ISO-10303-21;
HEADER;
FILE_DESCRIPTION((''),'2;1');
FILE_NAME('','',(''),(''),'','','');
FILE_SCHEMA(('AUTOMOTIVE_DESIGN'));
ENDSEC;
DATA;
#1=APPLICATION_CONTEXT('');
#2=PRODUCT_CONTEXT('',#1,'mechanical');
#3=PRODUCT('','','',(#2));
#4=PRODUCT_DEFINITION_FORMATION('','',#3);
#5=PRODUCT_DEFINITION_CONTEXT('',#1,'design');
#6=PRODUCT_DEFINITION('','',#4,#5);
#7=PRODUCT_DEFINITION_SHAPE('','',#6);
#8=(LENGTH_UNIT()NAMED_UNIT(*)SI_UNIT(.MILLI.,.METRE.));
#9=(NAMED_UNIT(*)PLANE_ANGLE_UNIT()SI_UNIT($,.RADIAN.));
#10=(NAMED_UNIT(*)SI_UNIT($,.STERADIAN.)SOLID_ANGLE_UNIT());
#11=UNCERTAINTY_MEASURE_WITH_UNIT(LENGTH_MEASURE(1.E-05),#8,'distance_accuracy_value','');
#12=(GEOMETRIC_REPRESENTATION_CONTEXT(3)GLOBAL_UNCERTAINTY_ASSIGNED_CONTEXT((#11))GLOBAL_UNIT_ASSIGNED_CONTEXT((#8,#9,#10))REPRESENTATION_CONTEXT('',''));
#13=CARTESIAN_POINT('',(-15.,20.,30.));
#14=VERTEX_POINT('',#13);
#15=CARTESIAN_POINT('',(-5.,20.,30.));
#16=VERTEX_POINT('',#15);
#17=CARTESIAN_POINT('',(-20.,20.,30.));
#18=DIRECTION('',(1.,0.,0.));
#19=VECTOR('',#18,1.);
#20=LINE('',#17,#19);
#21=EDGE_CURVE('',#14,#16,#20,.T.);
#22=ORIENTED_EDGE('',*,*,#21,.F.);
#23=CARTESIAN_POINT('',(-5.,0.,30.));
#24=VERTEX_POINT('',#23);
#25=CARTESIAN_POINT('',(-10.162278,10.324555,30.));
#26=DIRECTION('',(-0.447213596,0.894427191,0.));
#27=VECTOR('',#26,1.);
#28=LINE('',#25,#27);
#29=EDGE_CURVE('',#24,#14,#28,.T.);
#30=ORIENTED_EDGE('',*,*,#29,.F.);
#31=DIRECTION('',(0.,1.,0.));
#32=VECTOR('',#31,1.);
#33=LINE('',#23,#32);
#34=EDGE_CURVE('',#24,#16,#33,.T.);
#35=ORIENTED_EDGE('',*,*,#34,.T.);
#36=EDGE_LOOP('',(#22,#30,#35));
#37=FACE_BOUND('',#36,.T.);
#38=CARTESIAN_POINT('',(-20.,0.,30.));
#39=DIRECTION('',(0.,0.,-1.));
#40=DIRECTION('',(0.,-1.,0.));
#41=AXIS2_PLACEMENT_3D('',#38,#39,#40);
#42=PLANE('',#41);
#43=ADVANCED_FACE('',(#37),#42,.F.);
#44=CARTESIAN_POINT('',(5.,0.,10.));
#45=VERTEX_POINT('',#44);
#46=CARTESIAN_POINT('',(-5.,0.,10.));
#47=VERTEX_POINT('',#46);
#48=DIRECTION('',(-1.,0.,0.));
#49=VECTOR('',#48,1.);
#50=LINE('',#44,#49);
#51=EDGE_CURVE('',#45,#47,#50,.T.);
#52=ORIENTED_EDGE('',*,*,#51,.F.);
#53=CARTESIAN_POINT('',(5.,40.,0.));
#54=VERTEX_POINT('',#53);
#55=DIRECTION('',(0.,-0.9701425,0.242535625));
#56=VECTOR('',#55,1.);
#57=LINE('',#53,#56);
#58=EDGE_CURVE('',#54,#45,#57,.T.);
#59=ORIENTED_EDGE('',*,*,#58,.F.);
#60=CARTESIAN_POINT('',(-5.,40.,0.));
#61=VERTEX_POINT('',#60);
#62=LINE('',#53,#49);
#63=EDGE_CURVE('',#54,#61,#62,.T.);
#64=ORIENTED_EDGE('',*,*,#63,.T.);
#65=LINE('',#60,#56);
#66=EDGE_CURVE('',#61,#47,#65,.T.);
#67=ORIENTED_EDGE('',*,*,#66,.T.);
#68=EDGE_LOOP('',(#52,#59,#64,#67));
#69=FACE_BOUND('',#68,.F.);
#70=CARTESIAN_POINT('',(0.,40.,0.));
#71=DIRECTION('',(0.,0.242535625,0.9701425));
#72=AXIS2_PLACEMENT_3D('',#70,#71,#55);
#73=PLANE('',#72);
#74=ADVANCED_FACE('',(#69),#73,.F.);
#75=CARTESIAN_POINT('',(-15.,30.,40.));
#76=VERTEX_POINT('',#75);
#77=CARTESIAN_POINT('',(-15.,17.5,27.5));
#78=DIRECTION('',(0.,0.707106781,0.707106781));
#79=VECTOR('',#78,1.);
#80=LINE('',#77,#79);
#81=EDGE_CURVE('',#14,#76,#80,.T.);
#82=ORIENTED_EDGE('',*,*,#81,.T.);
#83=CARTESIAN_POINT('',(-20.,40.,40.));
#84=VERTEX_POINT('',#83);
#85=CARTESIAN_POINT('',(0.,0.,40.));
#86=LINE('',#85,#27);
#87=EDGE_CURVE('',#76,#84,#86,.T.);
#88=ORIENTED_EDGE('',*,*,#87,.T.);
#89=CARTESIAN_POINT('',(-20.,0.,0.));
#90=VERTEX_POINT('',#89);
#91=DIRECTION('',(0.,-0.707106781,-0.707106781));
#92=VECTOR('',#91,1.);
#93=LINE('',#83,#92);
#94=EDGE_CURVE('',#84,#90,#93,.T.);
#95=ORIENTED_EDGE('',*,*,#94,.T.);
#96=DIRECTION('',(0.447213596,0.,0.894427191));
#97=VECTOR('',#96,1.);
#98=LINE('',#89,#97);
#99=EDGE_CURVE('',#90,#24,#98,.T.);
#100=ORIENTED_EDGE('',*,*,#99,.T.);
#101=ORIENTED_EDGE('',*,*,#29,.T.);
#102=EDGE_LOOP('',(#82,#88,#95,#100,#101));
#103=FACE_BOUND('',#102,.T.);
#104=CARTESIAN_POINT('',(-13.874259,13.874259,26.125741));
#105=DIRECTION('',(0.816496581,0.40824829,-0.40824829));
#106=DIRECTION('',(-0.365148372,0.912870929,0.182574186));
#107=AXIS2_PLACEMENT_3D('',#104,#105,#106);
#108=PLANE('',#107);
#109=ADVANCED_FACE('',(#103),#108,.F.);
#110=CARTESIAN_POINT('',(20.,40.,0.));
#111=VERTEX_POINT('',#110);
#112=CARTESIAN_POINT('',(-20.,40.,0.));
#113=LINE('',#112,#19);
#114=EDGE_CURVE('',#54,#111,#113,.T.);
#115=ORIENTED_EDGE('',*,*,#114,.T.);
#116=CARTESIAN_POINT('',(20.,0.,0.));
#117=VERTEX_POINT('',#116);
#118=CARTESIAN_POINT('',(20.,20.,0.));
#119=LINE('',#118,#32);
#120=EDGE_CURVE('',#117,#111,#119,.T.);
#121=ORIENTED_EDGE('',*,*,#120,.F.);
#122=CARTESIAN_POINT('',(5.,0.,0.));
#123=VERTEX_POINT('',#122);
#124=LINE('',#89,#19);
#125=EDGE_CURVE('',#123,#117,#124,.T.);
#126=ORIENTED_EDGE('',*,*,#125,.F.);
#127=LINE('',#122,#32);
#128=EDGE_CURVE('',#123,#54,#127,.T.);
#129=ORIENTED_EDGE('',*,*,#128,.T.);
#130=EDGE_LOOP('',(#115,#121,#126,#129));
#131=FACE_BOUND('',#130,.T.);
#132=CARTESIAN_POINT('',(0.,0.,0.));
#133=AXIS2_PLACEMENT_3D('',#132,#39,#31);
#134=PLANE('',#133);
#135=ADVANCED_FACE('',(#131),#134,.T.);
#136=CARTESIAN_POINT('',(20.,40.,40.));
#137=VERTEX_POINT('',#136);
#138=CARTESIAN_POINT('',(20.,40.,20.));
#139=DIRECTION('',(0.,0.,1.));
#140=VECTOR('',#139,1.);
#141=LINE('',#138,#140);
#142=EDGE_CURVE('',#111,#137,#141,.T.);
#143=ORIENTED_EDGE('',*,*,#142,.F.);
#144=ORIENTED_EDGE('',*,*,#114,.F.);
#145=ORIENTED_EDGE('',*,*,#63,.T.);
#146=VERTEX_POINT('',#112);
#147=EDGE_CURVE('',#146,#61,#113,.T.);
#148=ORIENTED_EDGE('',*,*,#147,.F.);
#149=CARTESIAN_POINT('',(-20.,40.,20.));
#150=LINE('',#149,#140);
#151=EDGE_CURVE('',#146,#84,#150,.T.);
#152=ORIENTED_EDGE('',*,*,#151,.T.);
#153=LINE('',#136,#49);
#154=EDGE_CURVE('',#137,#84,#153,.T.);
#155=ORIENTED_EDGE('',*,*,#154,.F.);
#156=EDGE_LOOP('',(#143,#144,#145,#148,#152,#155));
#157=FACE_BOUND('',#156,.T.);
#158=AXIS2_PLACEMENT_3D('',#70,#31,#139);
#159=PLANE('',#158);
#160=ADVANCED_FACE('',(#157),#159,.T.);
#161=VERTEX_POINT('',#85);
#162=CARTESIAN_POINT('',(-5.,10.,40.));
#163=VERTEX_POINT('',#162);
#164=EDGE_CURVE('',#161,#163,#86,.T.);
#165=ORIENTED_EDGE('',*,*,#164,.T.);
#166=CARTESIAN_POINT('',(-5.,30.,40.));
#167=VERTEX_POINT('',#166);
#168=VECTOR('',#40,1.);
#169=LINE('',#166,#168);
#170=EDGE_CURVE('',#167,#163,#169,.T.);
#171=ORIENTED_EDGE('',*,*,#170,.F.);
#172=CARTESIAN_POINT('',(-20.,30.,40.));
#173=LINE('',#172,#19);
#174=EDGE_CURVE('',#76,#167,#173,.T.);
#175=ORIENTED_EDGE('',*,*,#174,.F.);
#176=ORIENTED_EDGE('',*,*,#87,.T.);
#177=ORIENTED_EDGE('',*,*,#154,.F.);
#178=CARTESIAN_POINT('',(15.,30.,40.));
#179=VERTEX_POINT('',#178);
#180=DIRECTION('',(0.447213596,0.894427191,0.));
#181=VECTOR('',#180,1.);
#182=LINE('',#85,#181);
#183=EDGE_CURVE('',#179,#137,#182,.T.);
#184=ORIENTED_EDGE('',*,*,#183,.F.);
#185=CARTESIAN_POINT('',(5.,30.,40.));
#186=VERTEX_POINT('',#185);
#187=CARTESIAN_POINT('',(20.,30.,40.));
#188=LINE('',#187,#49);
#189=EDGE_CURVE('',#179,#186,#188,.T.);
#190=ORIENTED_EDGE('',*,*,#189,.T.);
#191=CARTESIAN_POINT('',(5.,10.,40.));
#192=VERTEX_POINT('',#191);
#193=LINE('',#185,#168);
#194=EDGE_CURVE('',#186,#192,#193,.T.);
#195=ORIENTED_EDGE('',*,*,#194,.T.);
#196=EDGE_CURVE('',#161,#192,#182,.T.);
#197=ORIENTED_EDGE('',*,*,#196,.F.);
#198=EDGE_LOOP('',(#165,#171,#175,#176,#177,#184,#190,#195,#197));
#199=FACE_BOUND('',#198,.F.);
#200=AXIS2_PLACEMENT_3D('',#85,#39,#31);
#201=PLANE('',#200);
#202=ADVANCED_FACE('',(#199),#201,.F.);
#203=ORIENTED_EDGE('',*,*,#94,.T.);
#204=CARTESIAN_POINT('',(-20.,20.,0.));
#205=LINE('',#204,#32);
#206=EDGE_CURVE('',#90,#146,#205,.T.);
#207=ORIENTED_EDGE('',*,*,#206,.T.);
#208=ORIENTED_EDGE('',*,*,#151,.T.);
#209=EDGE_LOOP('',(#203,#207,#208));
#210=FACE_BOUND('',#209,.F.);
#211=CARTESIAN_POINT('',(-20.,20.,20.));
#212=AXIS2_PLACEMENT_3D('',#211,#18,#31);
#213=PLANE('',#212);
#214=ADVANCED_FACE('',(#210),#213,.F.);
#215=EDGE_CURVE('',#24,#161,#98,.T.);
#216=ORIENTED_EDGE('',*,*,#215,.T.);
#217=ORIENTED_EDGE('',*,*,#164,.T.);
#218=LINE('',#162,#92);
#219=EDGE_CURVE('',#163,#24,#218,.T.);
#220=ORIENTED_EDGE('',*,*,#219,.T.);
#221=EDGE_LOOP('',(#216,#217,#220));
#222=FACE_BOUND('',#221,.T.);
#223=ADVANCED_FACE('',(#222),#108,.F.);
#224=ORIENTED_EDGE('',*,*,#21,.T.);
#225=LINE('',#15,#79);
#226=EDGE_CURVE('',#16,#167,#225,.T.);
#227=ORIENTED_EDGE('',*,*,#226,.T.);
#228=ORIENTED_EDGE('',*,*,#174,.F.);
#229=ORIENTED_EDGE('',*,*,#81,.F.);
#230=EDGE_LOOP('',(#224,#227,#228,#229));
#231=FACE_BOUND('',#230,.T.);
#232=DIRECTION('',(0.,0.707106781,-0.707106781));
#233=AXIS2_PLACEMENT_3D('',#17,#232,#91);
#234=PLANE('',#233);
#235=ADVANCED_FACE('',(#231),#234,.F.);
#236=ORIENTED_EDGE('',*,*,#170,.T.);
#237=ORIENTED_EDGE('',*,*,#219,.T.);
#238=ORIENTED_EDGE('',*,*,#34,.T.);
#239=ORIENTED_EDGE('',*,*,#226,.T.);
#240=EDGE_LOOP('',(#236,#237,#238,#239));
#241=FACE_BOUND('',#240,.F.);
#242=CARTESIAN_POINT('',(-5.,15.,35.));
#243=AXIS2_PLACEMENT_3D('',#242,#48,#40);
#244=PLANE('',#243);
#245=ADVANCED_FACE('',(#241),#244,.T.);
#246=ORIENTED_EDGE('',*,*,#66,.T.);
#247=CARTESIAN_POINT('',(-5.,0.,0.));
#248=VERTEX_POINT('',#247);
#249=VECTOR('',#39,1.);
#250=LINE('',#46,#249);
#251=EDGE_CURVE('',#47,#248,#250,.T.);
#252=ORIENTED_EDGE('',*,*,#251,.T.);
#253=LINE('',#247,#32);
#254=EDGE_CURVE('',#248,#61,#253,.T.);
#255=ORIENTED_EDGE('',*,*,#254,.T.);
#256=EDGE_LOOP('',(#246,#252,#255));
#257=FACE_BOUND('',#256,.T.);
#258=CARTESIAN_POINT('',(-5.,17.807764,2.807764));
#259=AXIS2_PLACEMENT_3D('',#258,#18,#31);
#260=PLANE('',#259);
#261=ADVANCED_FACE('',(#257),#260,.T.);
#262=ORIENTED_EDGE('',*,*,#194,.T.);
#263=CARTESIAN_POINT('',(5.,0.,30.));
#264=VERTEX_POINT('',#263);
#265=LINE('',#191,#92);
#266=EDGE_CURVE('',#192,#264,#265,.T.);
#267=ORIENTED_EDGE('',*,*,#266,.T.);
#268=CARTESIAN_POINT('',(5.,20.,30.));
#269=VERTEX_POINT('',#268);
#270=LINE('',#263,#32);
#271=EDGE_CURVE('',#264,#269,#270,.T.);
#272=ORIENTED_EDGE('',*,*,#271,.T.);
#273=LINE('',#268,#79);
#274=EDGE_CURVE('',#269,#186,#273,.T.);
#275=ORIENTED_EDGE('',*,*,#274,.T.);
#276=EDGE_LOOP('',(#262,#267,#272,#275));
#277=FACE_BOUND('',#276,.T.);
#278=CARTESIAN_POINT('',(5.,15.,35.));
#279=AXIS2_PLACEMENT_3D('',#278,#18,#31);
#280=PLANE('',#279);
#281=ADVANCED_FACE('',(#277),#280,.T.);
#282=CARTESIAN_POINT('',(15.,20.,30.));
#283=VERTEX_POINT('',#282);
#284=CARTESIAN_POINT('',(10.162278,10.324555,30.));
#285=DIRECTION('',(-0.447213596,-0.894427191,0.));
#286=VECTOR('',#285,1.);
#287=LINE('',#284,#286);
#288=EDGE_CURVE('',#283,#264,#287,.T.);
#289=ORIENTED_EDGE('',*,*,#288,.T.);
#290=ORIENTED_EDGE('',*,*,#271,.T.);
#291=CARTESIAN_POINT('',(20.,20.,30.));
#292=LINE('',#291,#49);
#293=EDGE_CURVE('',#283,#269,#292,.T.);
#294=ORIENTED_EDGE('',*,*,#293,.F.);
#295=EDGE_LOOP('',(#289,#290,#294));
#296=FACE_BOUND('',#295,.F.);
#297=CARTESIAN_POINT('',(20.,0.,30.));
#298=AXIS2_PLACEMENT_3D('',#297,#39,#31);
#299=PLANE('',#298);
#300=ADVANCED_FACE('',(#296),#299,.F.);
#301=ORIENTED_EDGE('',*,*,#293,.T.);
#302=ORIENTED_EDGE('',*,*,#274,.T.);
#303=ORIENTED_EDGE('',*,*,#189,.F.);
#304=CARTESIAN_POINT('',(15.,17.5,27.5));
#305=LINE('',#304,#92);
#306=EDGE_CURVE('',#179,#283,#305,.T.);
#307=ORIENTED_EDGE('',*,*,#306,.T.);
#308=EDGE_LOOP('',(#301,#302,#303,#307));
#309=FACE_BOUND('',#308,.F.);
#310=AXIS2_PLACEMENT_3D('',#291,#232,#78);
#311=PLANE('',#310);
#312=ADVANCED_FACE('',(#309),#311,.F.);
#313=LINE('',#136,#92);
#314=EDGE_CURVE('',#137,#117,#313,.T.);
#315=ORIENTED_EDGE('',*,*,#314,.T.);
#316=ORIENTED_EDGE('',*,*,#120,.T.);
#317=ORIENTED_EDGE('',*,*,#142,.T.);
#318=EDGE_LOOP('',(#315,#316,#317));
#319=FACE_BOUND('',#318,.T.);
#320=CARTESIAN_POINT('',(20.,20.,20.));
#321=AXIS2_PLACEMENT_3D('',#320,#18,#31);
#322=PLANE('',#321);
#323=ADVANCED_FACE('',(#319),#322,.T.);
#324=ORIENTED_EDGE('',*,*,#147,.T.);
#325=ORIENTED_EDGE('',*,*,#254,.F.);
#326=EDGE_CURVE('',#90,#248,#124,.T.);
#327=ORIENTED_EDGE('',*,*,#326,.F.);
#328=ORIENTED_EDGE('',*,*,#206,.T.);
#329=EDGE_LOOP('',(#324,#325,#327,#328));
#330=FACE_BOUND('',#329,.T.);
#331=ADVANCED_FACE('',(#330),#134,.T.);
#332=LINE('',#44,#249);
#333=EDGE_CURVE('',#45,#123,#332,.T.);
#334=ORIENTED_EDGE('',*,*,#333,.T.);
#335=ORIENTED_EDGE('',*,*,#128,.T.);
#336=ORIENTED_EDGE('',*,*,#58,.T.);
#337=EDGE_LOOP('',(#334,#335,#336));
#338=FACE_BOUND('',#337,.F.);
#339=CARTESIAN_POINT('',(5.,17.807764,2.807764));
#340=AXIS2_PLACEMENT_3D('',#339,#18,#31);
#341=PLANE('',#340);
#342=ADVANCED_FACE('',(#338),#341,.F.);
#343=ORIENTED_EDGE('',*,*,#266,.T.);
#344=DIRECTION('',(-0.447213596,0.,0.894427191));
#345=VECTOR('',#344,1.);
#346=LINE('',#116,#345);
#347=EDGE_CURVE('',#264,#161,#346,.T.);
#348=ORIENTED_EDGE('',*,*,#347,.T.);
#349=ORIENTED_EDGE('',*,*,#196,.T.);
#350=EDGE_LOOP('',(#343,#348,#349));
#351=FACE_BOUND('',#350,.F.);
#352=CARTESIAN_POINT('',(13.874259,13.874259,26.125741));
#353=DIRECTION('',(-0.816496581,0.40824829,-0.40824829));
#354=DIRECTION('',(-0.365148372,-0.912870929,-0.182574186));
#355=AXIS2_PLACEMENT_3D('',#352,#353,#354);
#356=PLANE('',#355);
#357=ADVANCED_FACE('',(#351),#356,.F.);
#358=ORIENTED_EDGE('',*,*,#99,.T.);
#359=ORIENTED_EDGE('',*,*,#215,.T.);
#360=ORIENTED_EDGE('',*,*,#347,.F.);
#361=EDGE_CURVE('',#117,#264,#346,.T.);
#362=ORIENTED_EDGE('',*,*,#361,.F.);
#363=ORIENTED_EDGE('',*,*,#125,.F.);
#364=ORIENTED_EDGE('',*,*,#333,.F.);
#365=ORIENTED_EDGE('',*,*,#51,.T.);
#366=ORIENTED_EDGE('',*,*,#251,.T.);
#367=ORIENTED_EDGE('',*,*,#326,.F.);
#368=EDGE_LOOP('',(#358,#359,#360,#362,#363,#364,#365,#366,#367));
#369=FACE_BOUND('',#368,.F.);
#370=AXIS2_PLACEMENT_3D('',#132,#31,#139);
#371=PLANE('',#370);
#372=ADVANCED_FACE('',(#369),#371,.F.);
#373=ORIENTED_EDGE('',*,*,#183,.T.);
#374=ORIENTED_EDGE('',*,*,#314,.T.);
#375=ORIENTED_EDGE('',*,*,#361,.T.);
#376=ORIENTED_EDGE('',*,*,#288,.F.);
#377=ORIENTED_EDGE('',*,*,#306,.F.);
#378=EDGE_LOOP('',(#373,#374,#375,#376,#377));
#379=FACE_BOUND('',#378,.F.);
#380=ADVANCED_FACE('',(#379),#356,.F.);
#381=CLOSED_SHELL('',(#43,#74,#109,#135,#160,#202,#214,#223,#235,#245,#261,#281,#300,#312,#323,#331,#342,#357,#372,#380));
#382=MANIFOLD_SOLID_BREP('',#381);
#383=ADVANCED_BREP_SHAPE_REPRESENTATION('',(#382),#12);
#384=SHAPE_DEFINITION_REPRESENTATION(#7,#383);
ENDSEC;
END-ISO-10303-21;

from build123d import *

# Parameters (mm, degrees)
F0_W     = 40
F0_H     = 40
F1_DEPTH = 20
F5_DEPTH = 16.3309316186
F7_DEPTH = 5
F9_DEPTH = 15


# Not quite as in the source:
# - a pattern or mirror of a feature is missing from the dataset's text; its kind, count and spacing are read off the source's solid


with BuildPart() as f1:
    # F0 (on Right) → F1 (new body, symmetric)
    with BuildSketch(Plane.YZ):
        with Locations((20, 20)):
            Rectangle(F0_W, F0_H)
    extrude(amount=F1_DEPTH, both=True)

    # F4 (on 3pt) → F5 (cut, through all)
    with BuildSketch(Plane(origin=(13.3333333333, -6.6666666667, 6.6666666667), x_dir=(-0.3651483717, -0.9128709292, -0.1825741858), z_dir=(-0.8164965809, 0.4082482905, -0.4082482905))):
        Polygon((-7.3029674334, -8.94427191), (-7.3029674334, 35.77708764), (-51.1207720338, 26.83281573), align=None)
    f5 = extrude(amount=-F5_DEPTH, mode=Mode.SUBTRACT)

    # F5_copies: F5 across plane
    add(f5.mirror(Plane(origin=(0, 0, 0), x_dir=(0, 0, -1), z_dir=(-1, 0, 0))), mode=Mode.SUBTRACT)

    # F6 (on Right) → F7 (cut, symmetric)
    with BuildSketch(Plane.YZ):
        Polygon((0, 10), (0, 0), (40, 0), align=None)
    extrude(amount=F7_DEPTH, both=True, mode=Mode.SUBTRACT)

    # F8 (on face) → F9 (cut)
    with BuildSketch(Plane.YZ.offset(20)):
        Polygon((30, 40), (10, 40), (0, 30), (20, 30), align=None)
    f9 = extrude(amount=-F9_DEPTH, mode=Mode.SUBTRACT)

    # F9_copies: F9 across plane
    add(f9.mirror(Plane(origin=(0, 0, 0), x_dir=(0, 0, -1), z_dir=(-1, 0, 0))), mode=Mode.SUBTRACT)


solid = f1.part
